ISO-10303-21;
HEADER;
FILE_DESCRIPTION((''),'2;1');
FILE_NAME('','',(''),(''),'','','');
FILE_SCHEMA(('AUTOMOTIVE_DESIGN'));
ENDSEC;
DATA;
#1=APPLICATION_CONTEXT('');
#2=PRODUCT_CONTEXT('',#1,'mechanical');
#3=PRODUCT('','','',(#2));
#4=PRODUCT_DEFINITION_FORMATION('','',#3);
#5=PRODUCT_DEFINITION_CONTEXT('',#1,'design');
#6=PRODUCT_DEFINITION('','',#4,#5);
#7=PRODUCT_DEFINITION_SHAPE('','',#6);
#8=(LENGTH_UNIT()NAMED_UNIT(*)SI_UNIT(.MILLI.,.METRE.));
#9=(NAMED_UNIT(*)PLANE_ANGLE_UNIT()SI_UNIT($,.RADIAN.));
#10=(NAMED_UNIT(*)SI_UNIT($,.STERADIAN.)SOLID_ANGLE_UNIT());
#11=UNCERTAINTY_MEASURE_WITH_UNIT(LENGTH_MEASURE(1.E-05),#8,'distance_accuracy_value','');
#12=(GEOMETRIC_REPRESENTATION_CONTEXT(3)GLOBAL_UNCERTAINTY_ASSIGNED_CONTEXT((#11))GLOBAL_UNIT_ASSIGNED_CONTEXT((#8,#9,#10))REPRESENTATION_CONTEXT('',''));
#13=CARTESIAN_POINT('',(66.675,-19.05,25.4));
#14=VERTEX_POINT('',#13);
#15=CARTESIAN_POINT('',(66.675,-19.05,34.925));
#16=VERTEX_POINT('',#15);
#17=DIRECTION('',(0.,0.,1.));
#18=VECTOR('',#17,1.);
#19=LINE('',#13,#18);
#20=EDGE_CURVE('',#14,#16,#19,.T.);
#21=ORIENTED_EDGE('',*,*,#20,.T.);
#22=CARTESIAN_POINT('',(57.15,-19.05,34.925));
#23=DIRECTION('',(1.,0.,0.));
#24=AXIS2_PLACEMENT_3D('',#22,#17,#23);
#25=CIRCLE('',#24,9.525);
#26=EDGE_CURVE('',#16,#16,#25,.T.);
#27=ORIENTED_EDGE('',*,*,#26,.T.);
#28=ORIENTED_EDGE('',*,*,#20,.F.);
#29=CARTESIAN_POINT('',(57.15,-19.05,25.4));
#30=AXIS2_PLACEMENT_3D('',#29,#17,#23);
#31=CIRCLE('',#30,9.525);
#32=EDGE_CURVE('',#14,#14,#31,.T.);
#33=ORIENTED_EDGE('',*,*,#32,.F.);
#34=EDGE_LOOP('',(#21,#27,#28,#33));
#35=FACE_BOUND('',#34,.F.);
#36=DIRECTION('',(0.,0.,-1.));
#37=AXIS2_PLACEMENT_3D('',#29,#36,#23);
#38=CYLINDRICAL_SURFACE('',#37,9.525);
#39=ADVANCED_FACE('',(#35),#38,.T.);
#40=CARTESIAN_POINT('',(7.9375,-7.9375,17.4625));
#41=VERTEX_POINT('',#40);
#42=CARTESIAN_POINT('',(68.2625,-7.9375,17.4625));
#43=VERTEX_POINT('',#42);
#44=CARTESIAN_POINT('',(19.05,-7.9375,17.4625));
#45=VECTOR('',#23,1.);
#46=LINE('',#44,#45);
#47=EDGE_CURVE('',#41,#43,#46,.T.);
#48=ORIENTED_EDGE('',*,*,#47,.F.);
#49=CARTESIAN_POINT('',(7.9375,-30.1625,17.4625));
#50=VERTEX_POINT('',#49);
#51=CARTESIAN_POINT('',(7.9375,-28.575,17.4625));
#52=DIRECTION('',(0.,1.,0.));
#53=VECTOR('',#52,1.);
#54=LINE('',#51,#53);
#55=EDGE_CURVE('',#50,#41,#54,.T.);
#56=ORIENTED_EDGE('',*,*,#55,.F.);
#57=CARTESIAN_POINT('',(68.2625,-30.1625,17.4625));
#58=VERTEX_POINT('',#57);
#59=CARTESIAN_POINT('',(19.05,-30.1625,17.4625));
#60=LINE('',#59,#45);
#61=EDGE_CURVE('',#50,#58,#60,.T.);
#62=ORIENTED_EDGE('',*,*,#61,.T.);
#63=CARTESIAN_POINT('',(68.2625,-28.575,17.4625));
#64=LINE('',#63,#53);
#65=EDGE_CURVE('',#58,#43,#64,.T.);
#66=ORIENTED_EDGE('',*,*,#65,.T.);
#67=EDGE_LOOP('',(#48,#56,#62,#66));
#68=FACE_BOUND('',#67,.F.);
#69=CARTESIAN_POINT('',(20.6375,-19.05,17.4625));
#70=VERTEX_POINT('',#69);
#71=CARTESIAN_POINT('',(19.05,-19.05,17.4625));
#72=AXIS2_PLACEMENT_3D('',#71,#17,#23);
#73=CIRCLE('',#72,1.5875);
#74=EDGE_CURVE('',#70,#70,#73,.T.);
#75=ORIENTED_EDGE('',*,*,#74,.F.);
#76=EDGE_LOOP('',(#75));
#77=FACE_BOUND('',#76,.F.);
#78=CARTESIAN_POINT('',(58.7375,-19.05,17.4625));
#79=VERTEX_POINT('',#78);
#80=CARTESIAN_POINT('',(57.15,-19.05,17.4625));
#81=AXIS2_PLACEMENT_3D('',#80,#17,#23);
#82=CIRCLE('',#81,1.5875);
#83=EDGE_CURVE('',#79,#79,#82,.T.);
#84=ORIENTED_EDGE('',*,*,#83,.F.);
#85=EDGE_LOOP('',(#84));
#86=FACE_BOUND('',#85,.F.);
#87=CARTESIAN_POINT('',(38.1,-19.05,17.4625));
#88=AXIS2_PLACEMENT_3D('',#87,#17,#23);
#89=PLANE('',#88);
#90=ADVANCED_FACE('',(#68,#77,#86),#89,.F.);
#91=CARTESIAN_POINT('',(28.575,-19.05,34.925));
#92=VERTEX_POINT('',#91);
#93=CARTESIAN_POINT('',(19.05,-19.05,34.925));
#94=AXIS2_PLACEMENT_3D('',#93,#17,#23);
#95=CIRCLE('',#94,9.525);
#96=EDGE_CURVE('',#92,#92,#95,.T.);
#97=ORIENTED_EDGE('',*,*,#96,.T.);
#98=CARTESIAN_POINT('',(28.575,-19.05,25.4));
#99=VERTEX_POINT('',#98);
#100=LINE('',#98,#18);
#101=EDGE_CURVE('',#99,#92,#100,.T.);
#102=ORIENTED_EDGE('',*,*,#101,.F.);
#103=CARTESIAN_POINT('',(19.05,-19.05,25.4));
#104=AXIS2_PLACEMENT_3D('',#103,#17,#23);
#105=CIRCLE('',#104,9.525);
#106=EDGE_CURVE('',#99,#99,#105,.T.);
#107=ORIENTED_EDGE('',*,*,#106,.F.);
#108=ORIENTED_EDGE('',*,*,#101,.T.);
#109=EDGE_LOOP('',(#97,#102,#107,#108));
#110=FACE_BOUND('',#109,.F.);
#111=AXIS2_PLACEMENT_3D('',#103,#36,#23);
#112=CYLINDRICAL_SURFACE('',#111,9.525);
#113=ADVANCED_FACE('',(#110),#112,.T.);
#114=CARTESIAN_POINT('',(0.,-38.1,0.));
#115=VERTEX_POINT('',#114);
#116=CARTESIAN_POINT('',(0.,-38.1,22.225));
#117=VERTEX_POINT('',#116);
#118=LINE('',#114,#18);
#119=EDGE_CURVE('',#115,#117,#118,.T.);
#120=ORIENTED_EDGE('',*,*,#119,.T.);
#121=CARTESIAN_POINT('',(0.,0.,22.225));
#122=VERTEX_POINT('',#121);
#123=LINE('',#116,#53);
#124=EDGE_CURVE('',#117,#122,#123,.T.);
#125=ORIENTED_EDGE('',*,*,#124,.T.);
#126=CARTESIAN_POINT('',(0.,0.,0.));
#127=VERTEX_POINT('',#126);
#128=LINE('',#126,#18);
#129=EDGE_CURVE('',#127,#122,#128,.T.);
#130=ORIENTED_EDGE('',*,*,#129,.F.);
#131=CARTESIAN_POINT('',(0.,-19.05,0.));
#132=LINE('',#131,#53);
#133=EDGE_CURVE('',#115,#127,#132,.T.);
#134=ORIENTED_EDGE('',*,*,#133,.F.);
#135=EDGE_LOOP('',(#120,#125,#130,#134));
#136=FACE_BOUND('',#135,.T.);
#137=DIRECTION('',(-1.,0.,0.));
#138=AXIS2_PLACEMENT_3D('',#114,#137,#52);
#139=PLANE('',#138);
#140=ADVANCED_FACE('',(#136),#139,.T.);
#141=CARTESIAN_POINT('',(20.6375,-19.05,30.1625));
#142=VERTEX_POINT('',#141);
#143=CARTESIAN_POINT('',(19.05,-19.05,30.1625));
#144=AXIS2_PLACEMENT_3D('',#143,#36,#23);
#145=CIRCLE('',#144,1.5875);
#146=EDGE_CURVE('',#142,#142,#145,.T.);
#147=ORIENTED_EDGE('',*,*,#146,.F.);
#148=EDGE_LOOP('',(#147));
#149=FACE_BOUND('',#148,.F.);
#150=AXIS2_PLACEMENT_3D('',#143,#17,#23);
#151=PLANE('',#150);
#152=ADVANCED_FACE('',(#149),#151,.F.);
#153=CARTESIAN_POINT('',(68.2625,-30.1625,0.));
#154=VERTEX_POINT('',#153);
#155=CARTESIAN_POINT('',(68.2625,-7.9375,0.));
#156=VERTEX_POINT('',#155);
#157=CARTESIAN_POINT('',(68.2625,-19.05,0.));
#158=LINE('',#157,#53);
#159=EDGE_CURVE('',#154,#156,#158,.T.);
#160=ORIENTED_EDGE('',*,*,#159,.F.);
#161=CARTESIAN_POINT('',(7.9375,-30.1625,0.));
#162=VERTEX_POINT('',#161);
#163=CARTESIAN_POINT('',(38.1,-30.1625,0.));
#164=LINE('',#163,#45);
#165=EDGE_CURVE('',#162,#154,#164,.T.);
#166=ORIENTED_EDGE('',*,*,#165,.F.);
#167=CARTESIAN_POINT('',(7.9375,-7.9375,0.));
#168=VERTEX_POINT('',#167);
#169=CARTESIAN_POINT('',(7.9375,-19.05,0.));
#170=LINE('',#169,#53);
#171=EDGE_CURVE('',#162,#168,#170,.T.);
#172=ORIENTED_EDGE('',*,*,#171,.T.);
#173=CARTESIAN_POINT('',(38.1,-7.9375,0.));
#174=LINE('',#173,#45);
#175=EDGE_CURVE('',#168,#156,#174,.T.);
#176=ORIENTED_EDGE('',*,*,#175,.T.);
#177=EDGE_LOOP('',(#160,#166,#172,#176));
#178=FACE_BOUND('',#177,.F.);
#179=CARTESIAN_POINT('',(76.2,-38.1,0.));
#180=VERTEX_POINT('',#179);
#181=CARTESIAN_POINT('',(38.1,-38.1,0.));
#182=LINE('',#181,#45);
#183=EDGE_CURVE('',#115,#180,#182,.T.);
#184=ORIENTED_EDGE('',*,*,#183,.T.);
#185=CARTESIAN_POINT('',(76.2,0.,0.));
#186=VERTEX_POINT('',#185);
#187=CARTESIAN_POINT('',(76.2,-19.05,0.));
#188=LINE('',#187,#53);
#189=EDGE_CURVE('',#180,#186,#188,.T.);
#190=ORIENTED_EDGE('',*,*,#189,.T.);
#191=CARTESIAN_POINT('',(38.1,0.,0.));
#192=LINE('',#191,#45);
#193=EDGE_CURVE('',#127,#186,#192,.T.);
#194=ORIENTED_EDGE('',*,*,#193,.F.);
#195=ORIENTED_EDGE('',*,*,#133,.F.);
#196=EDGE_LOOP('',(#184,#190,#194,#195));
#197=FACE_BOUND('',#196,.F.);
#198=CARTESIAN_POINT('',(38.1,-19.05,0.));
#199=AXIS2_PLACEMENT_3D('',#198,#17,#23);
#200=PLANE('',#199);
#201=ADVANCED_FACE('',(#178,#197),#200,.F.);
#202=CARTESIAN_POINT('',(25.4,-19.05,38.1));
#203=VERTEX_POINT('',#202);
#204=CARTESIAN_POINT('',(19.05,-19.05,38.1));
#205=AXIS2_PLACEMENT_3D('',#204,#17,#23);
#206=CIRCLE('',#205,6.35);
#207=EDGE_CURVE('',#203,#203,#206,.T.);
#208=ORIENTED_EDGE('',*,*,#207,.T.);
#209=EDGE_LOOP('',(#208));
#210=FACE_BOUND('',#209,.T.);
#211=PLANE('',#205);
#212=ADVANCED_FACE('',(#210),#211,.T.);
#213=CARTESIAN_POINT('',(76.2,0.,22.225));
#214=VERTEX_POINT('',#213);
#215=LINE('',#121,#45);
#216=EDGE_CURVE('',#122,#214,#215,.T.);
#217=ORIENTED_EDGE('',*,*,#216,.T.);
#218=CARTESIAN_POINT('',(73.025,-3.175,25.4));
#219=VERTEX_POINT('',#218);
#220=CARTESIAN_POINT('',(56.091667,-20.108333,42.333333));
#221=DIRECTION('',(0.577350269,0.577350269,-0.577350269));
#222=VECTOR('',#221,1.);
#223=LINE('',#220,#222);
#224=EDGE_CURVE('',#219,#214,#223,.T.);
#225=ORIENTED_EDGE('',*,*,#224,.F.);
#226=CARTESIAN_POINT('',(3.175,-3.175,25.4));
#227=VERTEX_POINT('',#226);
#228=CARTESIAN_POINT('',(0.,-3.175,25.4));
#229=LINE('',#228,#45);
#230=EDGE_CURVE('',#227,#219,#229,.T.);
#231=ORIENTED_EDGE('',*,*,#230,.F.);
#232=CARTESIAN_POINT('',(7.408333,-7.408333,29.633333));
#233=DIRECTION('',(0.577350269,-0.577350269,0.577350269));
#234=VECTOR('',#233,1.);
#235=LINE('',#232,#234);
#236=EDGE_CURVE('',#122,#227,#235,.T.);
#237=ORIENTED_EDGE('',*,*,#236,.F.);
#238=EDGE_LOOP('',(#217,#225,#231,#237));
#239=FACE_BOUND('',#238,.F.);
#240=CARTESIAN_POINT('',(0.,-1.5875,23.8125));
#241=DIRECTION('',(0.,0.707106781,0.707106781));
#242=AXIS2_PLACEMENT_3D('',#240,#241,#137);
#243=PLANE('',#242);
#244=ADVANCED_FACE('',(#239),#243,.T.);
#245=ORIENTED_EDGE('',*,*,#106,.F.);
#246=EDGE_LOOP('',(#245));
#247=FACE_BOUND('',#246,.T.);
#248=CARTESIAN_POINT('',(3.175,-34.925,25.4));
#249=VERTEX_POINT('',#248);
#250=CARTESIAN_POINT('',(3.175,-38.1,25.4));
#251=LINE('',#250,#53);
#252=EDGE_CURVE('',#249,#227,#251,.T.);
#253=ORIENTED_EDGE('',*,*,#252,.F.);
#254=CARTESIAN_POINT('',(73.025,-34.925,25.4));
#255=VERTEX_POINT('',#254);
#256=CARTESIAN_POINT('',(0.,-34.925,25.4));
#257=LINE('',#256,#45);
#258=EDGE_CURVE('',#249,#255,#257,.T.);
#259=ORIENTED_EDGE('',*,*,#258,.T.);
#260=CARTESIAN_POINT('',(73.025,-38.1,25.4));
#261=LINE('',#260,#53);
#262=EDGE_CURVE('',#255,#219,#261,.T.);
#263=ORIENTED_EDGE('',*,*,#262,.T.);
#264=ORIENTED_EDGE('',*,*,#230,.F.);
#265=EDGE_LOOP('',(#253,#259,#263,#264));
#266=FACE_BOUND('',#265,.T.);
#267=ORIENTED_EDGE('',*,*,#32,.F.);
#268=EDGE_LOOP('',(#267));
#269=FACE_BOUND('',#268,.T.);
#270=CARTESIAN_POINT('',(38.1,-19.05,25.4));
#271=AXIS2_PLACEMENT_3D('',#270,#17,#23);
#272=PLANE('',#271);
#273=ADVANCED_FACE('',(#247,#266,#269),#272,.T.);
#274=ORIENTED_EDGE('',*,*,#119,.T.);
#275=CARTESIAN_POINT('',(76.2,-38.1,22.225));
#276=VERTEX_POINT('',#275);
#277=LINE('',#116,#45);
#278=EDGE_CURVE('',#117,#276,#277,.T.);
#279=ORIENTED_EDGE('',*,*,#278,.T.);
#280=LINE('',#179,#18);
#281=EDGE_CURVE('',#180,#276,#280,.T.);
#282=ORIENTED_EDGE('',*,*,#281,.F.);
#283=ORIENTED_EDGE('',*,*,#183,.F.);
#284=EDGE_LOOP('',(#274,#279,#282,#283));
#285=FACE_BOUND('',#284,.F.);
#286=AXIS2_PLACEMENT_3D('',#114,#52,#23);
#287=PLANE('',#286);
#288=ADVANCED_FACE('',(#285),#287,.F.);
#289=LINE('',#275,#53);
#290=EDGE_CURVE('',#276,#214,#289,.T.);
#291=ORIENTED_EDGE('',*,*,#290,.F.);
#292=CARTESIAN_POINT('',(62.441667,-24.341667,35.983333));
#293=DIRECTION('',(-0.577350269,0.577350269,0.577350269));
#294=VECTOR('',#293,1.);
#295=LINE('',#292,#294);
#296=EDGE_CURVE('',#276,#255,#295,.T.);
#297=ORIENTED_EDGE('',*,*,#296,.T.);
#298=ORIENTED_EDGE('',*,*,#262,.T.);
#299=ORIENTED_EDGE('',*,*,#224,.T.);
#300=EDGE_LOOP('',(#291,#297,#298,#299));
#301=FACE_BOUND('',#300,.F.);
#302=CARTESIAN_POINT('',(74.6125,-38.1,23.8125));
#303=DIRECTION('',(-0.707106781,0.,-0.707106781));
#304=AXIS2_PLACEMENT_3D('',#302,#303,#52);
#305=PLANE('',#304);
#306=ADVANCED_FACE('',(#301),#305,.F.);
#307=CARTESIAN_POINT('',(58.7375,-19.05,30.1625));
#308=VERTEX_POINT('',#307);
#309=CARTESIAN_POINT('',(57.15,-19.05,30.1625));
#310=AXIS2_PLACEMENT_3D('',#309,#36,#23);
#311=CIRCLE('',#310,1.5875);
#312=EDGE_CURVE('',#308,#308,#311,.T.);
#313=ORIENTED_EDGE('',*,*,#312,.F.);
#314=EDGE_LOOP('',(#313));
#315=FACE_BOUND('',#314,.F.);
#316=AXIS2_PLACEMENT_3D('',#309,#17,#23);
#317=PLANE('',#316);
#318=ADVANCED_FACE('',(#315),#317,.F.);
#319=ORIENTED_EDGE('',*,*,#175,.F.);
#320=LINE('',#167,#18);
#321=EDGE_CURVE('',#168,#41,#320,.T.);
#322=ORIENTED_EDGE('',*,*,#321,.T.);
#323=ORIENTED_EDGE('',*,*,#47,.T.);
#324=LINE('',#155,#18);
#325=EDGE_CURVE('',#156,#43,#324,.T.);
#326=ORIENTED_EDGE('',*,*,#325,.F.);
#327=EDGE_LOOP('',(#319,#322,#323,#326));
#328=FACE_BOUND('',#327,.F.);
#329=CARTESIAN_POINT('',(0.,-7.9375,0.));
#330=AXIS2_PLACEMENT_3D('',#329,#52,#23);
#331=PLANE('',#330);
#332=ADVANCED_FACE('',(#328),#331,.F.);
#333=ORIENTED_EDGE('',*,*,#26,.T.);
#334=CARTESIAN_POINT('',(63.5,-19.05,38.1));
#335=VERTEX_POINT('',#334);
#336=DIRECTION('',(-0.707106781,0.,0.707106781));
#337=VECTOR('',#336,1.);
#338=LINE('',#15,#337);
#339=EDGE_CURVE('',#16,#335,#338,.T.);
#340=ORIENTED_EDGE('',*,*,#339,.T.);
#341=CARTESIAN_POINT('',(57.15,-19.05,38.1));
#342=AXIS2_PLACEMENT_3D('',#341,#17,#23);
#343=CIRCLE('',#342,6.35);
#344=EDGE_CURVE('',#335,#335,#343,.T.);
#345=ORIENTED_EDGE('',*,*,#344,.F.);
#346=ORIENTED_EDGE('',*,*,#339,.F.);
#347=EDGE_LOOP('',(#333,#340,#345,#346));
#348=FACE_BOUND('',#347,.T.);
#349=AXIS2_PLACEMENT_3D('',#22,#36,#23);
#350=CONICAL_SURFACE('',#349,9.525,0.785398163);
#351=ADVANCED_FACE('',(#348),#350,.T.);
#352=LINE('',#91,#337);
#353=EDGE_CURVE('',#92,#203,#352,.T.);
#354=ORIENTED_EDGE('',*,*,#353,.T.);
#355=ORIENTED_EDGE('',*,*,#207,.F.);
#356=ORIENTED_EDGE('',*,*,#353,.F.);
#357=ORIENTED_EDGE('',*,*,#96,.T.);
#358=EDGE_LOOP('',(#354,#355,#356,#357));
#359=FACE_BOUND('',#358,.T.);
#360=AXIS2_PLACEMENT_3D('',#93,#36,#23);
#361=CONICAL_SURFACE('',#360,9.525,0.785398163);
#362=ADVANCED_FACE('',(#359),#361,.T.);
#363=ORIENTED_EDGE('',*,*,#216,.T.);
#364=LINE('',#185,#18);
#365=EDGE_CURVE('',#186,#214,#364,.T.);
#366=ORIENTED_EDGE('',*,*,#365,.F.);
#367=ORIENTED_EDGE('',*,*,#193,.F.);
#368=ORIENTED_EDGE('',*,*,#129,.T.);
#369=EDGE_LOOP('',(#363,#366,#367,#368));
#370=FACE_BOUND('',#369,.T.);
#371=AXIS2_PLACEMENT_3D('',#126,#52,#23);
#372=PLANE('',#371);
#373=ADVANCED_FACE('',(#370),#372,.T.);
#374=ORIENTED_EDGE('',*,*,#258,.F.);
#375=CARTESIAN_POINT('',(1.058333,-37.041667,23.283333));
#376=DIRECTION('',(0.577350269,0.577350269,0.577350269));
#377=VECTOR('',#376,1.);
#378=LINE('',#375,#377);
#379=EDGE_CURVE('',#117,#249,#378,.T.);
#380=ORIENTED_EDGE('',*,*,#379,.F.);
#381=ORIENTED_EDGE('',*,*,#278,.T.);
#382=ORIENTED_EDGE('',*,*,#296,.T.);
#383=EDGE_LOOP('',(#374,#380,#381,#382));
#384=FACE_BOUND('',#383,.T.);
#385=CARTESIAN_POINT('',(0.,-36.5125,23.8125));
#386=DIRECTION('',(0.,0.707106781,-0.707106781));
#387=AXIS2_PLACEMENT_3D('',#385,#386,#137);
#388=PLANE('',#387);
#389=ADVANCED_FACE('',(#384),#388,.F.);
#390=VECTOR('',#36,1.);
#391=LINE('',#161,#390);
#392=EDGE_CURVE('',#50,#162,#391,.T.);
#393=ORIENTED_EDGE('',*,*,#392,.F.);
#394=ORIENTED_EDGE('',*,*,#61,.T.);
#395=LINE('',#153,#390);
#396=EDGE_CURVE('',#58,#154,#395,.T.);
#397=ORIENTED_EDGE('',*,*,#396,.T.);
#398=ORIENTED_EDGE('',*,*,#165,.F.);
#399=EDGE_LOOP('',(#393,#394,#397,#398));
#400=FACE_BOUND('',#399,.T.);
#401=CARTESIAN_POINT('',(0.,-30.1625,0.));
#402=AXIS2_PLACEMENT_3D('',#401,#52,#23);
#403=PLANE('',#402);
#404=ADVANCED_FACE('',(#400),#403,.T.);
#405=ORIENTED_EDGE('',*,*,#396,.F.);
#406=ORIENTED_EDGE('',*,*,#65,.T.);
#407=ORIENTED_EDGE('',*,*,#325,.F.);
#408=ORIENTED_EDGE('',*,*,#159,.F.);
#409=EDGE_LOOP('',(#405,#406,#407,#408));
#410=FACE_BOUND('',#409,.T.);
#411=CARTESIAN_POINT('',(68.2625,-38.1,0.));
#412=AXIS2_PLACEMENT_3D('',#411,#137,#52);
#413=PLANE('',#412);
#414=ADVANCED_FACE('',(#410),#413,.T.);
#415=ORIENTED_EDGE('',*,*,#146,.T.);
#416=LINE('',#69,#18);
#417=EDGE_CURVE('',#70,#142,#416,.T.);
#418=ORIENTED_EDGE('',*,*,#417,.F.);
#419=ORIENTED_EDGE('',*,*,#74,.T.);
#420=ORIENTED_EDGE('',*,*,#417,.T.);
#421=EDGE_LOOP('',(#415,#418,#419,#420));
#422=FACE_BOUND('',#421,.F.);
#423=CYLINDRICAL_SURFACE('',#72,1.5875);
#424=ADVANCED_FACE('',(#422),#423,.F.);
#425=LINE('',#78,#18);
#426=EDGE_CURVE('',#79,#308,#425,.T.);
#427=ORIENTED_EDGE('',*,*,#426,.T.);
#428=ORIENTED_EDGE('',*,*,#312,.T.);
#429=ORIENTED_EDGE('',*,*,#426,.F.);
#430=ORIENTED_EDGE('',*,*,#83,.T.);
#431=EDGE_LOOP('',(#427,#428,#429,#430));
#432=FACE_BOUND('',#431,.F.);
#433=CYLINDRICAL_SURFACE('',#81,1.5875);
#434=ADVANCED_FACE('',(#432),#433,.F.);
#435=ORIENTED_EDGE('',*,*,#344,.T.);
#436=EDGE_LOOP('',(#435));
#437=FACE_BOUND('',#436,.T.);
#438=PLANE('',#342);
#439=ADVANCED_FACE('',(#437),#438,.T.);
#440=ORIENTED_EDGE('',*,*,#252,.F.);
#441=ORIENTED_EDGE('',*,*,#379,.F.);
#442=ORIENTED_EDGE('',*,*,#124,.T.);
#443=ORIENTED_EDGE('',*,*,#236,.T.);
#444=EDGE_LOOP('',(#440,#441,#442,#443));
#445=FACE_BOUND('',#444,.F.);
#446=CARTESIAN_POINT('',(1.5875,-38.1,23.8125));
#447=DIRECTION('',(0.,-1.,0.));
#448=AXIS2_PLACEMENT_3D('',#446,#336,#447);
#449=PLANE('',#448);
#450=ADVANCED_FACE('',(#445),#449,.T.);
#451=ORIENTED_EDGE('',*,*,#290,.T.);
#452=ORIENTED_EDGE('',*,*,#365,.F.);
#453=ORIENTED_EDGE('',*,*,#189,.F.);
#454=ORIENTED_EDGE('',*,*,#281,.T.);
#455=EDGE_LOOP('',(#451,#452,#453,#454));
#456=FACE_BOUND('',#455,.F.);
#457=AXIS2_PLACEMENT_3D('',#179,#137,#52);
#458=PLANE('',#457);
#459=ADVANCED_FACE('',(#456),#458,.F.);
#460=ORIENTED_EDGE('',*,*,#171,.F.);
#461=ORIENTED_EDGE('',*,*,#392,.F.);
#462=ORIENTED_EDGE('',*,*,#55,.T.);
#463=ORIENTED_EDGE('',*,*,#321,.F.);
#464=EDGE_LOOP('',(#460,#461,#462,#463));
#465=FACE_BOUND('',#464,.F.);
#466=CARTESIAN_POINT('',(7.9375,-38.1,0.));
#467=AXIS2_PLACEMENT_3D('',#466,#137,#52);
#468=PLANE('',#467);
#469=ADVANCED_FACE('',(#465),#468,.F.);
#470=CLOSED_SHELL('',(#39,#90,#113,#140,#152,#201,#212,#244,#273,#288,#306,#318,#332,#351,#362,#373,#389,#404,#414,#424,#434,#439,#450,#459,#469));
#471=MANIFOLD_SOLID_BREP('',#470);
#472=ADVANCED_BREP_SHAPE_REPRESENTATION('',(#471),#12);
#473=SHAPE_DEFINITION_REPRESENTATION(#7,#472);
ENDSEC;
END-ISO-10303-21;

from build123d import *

# Parameters (mm, degrees)
F0_W     = 76.2
F0_H     = 38.1
F1_DEPTH = 25.4
F2_R     = 9.525
F3_DEPTH = 12.7
F4_SIZE2 = 3.175
F4_SIZE  = 3.175
F5_T     = 7.9375


# Not quite as in the source:
# - a shell that OpenCascade refuses in one call is made with other operations: the cavity is built on its own and cut out


with BuildPart() as f1:
    # F0 (on Top) → F1 (new body)
    with BuildSketch(Plane.XY):
        with Locations((38.1, -19.05)):
            Rectangle(F0_W, F0_H)
    extrude(amount=F1_DEPTH)

    # F2 (on face) → F3 (join)
    with BuildSketch(Plane.XY.offset(25.4)):
        with Locations((19.05, -19.05)):
            Circle(F2_R)
        with Locations((57.15, -19.05)):
            Circle(F2_R)
    extrude(amount=F3_DEPTH)

    # F4
    f4_edges = [f1.edges().sort_by_distance(p)[0] for p in [
        (47.625, -19.05, 38.1),
        (9.525, -19.05, 38.1),
        (38.1, -38.1, 25.4),
        (76.2, -19.05, 25.4),
        (38.1, 0, 25.4),
        (0, -19.05, 25.4),
    ]]
    chamfer(f4_edges, length=F4_SIZE, length2=F4_SIZE2)

    # F5: shell of thickness 7.9375, made by hand


with BuildPart() as f5_core1:
    # F5_t2: copy of F1
    add(f1.part)

    # the walls: a layer under each face that stays
    f5_faces = [f5_core1.faces().sort_by_distance(p)[0] for p in [
        (38.1, 0, 11.1125),
        (76.2, -19.05, 11.1125),
        (38.1, -1.5875, 23.8125),
        (0, -19.05, 11.1125),
        (38.1, -38.1, 11.1125),
        (74.6125, -19.05, 23.8125),
        (38.1, -19.05, 25.4),
        (1.5875, -19.05, 23.8125),
        (38.1, -36.5125, 23.8125),
        (9.525, -19.05, 30.1625),
        (47.625, -19.05, 30.1625),
        (11.1125, -19.05, 36.5125),
        (49.2125, -19.05, 36.5125),
        (19.05, -19.05, 38.1),
        (57.15, -19.05, 38.1),
    ]]
    thicken(f5_faces, amount=-F5_T, mode=Mode.SUBTRACT)

    # F5_s3 → F5_t4 (revolve, cut)
    with BuildSketch(Plane.XZ.offset(19.05)):
        Polygon((28.654375, 25.479375), (28.575, 17.4625), (20.6375, 17.4625), (20.6375, 25.4), align=None)
    revolve(axis=Axis((19.05, -19.05, 25.4), (0, 0, 1)), mode=Mode.SUBTRACT)

    # F5_s5 → F5_t6 (revolve, cut)
    with BuildSketch(Plane.XZ.offset(19.05)):
        Polygon((66.754375, 25.479375), (66.675, 17.4625), (58.7375, 17.4625), (58.7375, 25.4), align=None)
    revolve(axis=Axis((57.15, -19.05, 25.4), (0, 0, 1)), mode=Mode.SUBTRACT)


with BuildPart() as f1_1:
    add(f1.part)

    # what is left inside the walls is the cavity
    f5_cavity = [f5_core1.part.solids().sort_by_distance(p)[0] for p in [
        (38.1, -22.754167, 0.079375),
    ]]
    add(f5_cavity, mode=Mode.SUBTRACT)


solid = f1_1.part
